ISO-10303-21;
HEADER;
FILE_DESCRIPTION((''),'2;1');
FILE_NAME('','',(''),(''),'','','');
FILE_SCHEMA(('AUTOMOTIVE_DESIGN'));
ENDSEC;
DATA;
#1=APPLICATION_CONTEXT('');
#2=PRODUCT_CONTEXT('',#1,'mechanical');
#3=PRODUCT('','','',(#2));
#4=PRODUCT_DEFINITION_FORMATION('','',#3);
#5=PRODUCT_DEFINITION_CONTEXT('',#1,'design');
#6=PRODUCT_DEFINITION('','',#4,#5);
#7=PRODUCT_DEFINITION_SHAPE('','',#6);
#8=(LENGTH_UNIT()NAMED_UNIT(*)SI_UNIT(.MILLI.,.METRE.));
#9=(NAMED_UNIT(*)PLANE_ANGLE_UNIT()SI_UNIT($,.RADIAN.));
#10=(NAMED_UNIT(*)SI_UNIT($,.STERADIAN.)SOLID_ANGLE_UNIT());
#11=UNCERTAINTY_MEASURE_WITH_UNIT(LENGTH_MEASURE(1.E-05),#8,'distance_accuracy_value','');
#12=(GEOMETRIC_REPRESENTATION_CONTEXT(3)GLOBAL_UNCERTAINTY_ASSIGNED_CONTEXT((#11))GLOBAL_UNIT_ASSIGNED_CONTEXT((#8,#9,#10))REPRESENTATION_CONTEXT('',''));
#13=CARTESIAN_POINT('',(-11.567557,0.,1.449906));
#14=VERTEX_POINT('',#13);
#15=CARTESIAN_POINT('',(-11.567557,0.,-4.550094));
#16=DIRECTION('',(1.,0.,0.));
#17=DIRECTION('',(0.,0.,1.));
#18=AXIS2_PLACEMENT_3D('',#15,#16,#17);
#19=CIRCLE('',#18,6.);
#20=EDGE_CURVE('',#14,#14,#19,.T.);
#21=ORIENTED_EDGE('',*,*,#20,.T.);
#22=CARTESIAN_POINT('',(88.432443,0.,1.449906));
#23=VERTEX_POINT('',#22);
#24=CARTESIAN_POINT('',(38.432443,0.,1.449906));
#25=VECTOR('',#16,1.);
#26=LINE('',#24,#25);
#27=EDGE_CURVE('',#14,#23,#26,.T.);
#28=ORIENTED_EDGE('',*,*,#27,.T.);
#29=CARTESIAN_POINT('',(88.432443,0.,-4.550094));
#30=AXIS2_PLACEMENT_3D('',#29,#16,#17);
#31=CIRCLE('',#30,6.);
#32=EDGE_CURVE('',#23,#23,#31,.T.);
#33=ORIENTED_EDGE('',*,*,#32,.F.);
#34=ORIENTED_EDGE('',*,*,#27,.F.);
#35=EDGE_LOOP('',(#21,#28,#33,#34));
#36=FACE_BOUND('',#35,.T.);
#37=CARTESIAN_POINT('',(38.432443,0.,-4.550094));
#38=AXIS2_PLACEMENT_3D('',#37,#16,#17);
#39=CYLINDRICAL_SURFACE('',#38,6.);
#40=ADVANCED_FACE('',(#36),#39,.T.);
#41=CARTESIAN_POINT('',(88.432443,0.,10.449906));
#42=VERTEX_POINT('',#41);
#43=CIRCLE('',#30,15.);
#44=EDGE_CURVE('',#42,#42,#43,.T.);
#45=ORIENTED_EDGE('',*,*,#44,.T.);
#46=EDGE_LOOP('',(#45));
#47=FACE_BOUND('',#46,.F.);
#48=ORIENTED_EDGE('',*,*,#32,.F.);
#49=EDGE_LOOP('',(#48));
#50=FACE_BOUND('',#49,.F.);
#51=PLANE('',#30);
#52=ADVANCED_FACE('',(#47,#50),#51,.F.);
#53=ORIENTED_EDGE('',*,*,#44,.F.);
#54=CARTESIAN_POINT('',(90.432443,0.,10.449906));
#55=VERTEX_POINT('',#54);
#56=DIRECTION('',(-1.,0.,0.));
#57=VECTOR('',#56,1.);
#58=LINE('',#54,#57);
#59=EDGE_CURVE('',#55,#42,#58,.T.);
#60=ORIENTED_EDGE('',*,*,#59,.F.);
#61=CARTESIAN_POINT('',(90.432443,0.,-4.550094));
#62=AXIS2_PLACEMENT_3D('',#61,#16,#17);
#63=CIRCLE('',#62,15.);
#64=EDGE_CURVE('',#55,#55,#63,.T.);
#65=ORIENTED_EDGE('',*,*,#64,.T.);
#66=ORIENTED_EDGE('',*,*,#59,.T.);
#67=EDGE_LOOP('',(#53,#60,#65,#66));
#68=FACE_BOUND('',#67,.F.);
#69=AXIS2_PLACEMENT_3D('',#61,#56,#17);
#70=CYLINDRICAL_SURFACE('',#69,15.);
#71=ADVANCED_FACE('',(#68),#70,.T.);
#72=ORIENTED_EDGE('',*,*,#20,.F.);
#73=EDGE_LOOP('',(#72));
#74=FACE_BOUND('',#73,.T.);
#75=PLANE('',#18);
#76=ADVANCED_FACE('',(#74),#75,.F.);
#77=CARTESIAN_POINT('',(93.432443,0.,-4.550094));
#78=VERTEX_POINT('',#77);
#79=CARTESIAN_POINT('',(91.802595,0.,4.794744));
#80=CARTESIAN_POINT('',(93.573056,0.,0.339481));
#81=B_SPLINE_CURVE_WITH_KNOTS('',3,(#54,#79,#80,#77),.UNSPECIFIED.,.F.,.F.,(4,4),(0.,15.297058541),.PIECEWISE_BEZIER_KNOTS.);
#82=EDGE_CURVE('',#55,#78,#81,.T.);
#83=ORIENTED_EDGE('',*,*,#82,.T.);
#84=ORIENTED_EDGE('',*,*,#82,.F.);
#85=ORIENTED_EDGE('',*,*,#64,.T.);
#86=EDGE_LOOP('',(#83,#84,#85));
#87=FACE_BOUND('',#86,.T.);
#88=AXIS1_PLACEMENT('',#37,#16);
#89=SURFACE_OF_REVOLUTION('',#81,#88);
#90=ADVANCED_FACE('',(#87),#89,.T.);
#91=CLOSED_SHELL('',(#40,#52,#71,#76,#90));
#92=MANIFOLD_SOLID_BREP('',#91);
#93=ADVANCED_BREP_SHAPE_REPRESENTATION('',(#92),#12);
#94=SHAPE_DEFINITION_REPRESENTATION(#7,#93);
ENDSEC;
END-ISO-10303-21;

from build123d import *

# Parameters (mm, degrees)
F0_W = 100
F0_H = 6


# Not quite as in the source:
# - a feature of the source that left no trace in its solid (it failed there, or was rolled back) is left out


with BuildPart() as f1:
    # F0 (on Front) → F1 (revolve)
    with BuildSketch(Plane.XZ):
        with BuildLine():
            Line((88.4324429527, 10.4499064941), (88.4324429527, 1.4499064941))
            Line((88.4324429527, 1.4499064941), (88.4324429527, -4.5500935059))
            Line((88.4324429527, -4.5500935059), (93.4324429527, -4.5500935059))
            add(Edge.make_bspline(
                [(90.4324429527, 10.4499064941), (91.8025947904, 4.794743992), (93.5730556099, 0.3394810932), (93.4324429527, -4.5500935059)],
                knots=[0, 0, 0, 0, 15.2970585408, 15.2970585408, 15.2970585408, 15.2970585408], degree=3))
            Line((90.4324429527, 10.4499064941), (88.4324429527, 10.4499064941))
        make_face()
        with Locations((38.4324429527, -1.5500935059)):
            Rectangle(F0_W, F0_H)
    revolve(axis=Axis((38.4324429527, 0, -4.5500935059), (1, 0, 0)))


solid = f1.part
